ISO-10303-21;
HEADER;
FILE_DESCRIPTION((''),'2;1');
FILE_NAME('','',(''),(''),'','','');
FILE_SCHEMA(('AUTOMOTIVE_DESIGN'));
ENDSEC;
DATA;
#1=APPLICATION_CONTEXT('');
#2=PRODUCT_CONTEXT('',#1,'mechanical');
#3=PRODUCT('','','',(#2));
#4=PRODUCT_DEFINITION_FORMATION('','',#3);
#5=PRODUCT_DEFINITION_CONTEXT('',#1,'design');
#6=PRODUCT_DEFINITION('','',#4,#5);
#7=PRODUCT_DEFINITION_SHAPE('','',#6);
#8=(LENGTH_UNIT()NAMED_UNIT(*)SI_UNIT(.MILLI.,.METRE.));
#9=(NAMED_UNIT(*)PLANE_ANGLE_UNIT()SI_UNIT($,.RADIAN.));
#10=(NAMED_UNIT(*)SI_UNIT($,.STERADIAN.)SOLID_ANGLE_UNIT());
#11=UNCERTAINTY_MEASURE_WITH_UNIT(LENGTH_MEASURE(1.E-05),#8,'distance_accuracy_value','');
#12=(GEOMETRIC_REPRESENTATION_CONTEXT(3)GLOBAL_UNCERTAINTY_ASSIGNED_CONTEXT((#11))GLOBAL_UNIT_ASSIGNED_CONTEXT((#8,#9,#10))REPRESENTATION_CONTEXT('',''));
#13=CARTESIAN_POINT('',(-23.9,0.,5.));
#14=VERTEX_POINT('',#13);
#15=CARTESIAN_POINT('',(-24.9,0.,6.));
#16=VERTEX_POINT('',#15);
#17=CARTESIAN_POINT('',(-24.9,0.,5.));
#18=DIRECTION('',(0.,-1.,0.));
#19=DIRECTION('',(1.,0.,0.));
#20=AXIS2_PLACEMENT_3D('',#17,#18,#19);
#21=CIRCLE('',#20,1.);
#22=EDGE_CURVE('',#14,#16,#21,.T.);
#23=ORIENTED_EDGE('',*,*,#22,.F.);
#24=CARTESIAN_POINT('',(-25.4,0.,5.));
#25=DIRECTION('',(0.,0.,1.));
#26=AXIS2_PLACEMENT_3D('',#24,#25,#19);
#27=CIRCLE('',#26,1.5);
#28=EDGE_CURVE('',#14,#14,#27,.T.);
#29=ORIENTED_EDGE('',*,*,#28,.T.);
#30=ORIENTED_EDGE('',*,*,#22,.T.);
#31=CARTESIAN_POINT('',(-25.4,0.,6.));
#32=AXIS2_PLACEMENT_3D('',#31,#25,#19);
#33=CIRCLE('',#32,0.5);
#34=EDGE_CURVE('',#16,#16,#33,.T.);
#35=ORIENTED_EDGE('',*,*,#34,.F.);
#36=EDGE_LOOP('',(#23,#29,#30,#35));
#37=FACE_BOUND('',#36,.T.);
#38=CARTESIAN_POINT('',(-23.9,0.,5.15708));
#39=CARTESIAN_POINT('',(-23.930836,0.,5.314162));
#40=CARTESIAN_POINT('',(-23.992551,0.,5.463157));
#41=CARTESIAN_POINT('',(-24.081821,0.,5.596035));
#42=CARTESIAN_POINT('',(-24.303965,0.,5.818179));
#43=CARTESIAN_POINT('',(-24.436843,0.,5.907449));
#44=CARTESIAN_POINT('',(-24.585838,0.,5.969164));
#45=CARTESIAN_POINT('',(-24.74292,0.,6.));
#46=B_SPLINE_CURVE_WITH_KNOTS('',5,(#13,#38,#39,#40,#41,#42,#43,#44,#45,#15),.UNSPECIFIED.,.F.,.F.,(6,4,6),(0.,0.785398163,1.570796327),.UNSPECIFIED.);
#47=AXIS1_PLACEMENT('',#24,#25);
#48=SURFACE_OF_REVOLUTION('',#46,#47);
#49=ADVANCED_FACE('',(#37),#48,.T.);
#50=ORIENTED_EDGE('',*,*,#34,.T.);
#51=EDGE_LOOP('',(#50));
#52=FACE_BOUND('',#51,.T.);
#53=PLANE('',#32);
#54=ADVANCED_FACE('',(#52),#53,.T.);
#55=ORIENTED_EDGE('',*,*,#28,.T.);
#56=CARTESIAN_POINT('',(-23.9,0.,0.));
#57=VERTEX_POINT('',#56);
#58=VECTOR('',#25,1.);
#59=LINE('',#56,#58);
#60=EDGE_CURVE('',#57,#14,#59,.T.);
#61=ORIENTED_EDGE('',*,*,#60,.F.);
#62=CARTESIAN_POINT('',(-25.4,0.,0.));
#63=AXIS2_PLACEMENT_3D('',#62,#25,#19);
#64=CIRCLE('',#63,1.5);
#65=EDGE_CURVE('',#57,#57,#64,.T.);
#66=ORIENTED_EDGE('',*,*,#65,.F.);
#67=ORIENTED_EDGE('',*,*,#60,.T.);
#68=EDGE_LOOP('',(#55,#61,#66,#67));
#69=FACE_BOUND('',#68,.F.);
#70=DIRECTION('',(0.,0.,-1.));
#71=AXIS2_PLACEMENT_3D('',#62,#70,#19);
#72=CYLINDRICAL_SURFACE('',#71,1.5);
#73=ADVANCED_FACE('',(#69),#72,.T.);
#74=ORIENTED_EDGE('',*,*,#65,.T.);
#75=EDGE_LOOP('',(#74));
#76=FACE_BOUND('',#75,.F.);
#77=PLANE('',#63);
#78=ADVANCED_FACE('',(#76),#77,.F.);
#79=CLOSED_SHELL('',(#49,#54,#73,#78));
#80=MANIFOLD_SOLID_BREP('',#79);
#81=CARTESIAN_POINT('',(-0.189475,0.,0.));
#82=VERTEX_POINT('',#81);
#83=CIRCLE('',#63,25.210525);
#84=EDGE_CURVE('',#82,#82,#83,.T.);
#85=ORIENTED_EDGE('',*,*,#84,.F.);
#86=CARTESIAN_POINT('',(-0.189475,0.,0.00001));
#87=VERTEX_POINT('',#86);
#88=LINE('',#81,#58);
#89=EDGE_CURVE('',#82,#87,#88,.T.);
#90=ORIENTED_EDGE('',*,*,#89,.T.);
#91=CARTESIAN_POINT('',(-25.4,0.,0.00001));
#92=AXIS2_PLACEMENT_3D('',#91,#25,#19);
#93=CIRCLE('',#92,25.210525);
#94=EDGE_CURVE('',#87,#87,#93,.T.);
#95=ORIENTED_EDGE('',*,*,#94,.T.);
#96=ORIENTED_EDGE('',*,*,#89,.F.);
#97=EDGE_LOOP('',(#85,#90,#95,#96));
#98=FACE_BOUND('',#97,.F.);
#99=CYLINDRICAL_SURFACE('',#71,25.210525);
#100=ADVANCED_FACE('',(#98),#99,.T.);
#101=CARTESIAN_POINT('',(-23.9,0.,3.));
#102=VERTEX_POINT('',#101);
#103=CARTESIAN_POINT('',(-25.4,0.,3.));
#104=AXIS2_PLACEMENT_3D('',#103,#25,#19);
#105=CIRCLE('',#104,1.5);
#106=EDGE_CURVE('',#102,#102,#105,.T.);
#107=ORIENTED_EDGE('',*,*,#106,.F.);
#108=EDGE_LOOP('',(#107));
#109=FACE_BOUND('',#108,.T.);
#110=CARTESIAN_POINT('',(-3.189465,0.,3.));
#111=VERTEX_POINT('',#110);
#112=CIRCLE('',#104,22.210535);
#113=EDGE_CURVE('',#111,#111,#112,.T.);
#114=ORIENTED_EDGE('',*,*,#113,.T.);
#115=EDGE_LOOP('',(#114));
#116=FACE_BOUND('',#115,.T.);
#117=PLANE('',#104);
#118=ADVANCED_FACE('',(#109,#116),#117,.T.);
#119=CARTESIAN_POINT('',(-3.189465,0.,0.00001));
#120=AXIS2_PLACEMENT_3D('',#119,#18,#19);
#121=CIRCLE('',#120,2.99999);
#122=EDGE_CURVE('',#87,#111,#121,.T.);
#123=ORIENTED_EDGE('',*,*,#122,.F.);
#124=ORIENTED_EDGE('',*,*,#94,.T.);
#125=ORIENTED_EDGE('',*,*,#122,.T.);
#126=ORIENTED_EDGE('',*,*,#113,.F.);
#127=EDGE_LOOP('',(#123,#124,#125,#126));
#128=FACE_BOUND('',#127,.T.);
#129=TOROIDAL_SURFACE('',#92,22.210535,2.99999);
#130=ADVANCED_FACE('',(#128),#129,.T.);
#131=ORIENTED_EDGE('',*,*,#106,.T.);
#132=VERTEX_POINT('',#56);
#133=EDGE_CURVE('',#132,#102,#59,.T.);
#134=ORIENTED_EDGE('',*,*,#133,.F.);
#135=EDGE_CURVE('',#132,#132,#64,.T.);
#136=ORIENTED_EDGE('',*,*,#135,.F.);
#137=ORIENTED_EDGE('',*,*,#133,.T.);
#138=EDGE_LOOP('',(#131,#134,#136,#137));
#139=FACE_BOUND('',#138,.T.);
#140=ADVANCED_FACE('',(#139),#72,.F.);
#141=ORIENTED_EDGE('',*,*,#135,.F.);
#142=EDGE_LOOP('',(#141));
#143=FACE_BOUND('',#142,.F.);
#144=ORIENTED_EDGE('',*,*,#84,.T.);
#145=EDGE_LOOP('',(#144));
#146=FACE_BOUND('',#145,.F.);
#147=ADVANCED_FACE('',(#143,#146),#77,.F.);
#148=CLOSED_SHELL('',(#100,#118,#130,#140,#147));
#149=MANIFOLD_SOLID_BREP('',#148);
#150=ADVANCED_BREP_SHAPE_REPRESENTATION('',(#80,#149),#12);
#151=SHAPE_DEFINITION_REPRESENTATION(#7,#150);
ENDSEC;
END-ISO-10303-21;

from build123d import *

# Parameters (mm, degrees)
F0_R     = 1.5
F1_DEPTH = 6
F0_R_2   = 25.2105248434
F2_DEPTH = 3
F3_R     = 1
F4_R     = 2.99999


# Not quite as in the source:
# - a fillet or chamfer is up to 0.001 mm smaller than in the source, because OpenCascade refuses the exact size
# - a feature names something its author has since deleted; it is built from what else it names


with BuildPart() as f1:
    # F0 (on Top) → F1 (new body)
    with BuildSketch(Plane.XY):
        with Locations((-25.4, 0)):
            Circle(F0_R)
    extrude(amount=F1_DEPTH)

    # F3
    f3_edges = [f1.edges().sort_by_distance(p)[0] for p in [
        (-26.9, 0, 6),
    ]]
    fillet(f3_edges, radius=F3_R)


with BuildPart() as f2:
    # F0 (on Top) → F2 (new body)
    with BuildSketch(Plane.XY):
        with Locations((-25.4, 0)):
            Circle(F0_R_2)
        with Locations((-25.4, 0)):
            Circle(F0_R, mode=Mode.SUBTRACT)
    extrude(amount=F2_DEPTH)

    # F4 (radius 3 in the source; OpenCascade refuses exactly that, so slightly less here)
    f4_edges = [f2.edges().sort_by_distance(p)[0] for p in [
        (-50.610525, 0, 3),
    ]]
    fillet(f4_edges, radius=F4_R)


solid = Compound([f1.part, f2.part])
